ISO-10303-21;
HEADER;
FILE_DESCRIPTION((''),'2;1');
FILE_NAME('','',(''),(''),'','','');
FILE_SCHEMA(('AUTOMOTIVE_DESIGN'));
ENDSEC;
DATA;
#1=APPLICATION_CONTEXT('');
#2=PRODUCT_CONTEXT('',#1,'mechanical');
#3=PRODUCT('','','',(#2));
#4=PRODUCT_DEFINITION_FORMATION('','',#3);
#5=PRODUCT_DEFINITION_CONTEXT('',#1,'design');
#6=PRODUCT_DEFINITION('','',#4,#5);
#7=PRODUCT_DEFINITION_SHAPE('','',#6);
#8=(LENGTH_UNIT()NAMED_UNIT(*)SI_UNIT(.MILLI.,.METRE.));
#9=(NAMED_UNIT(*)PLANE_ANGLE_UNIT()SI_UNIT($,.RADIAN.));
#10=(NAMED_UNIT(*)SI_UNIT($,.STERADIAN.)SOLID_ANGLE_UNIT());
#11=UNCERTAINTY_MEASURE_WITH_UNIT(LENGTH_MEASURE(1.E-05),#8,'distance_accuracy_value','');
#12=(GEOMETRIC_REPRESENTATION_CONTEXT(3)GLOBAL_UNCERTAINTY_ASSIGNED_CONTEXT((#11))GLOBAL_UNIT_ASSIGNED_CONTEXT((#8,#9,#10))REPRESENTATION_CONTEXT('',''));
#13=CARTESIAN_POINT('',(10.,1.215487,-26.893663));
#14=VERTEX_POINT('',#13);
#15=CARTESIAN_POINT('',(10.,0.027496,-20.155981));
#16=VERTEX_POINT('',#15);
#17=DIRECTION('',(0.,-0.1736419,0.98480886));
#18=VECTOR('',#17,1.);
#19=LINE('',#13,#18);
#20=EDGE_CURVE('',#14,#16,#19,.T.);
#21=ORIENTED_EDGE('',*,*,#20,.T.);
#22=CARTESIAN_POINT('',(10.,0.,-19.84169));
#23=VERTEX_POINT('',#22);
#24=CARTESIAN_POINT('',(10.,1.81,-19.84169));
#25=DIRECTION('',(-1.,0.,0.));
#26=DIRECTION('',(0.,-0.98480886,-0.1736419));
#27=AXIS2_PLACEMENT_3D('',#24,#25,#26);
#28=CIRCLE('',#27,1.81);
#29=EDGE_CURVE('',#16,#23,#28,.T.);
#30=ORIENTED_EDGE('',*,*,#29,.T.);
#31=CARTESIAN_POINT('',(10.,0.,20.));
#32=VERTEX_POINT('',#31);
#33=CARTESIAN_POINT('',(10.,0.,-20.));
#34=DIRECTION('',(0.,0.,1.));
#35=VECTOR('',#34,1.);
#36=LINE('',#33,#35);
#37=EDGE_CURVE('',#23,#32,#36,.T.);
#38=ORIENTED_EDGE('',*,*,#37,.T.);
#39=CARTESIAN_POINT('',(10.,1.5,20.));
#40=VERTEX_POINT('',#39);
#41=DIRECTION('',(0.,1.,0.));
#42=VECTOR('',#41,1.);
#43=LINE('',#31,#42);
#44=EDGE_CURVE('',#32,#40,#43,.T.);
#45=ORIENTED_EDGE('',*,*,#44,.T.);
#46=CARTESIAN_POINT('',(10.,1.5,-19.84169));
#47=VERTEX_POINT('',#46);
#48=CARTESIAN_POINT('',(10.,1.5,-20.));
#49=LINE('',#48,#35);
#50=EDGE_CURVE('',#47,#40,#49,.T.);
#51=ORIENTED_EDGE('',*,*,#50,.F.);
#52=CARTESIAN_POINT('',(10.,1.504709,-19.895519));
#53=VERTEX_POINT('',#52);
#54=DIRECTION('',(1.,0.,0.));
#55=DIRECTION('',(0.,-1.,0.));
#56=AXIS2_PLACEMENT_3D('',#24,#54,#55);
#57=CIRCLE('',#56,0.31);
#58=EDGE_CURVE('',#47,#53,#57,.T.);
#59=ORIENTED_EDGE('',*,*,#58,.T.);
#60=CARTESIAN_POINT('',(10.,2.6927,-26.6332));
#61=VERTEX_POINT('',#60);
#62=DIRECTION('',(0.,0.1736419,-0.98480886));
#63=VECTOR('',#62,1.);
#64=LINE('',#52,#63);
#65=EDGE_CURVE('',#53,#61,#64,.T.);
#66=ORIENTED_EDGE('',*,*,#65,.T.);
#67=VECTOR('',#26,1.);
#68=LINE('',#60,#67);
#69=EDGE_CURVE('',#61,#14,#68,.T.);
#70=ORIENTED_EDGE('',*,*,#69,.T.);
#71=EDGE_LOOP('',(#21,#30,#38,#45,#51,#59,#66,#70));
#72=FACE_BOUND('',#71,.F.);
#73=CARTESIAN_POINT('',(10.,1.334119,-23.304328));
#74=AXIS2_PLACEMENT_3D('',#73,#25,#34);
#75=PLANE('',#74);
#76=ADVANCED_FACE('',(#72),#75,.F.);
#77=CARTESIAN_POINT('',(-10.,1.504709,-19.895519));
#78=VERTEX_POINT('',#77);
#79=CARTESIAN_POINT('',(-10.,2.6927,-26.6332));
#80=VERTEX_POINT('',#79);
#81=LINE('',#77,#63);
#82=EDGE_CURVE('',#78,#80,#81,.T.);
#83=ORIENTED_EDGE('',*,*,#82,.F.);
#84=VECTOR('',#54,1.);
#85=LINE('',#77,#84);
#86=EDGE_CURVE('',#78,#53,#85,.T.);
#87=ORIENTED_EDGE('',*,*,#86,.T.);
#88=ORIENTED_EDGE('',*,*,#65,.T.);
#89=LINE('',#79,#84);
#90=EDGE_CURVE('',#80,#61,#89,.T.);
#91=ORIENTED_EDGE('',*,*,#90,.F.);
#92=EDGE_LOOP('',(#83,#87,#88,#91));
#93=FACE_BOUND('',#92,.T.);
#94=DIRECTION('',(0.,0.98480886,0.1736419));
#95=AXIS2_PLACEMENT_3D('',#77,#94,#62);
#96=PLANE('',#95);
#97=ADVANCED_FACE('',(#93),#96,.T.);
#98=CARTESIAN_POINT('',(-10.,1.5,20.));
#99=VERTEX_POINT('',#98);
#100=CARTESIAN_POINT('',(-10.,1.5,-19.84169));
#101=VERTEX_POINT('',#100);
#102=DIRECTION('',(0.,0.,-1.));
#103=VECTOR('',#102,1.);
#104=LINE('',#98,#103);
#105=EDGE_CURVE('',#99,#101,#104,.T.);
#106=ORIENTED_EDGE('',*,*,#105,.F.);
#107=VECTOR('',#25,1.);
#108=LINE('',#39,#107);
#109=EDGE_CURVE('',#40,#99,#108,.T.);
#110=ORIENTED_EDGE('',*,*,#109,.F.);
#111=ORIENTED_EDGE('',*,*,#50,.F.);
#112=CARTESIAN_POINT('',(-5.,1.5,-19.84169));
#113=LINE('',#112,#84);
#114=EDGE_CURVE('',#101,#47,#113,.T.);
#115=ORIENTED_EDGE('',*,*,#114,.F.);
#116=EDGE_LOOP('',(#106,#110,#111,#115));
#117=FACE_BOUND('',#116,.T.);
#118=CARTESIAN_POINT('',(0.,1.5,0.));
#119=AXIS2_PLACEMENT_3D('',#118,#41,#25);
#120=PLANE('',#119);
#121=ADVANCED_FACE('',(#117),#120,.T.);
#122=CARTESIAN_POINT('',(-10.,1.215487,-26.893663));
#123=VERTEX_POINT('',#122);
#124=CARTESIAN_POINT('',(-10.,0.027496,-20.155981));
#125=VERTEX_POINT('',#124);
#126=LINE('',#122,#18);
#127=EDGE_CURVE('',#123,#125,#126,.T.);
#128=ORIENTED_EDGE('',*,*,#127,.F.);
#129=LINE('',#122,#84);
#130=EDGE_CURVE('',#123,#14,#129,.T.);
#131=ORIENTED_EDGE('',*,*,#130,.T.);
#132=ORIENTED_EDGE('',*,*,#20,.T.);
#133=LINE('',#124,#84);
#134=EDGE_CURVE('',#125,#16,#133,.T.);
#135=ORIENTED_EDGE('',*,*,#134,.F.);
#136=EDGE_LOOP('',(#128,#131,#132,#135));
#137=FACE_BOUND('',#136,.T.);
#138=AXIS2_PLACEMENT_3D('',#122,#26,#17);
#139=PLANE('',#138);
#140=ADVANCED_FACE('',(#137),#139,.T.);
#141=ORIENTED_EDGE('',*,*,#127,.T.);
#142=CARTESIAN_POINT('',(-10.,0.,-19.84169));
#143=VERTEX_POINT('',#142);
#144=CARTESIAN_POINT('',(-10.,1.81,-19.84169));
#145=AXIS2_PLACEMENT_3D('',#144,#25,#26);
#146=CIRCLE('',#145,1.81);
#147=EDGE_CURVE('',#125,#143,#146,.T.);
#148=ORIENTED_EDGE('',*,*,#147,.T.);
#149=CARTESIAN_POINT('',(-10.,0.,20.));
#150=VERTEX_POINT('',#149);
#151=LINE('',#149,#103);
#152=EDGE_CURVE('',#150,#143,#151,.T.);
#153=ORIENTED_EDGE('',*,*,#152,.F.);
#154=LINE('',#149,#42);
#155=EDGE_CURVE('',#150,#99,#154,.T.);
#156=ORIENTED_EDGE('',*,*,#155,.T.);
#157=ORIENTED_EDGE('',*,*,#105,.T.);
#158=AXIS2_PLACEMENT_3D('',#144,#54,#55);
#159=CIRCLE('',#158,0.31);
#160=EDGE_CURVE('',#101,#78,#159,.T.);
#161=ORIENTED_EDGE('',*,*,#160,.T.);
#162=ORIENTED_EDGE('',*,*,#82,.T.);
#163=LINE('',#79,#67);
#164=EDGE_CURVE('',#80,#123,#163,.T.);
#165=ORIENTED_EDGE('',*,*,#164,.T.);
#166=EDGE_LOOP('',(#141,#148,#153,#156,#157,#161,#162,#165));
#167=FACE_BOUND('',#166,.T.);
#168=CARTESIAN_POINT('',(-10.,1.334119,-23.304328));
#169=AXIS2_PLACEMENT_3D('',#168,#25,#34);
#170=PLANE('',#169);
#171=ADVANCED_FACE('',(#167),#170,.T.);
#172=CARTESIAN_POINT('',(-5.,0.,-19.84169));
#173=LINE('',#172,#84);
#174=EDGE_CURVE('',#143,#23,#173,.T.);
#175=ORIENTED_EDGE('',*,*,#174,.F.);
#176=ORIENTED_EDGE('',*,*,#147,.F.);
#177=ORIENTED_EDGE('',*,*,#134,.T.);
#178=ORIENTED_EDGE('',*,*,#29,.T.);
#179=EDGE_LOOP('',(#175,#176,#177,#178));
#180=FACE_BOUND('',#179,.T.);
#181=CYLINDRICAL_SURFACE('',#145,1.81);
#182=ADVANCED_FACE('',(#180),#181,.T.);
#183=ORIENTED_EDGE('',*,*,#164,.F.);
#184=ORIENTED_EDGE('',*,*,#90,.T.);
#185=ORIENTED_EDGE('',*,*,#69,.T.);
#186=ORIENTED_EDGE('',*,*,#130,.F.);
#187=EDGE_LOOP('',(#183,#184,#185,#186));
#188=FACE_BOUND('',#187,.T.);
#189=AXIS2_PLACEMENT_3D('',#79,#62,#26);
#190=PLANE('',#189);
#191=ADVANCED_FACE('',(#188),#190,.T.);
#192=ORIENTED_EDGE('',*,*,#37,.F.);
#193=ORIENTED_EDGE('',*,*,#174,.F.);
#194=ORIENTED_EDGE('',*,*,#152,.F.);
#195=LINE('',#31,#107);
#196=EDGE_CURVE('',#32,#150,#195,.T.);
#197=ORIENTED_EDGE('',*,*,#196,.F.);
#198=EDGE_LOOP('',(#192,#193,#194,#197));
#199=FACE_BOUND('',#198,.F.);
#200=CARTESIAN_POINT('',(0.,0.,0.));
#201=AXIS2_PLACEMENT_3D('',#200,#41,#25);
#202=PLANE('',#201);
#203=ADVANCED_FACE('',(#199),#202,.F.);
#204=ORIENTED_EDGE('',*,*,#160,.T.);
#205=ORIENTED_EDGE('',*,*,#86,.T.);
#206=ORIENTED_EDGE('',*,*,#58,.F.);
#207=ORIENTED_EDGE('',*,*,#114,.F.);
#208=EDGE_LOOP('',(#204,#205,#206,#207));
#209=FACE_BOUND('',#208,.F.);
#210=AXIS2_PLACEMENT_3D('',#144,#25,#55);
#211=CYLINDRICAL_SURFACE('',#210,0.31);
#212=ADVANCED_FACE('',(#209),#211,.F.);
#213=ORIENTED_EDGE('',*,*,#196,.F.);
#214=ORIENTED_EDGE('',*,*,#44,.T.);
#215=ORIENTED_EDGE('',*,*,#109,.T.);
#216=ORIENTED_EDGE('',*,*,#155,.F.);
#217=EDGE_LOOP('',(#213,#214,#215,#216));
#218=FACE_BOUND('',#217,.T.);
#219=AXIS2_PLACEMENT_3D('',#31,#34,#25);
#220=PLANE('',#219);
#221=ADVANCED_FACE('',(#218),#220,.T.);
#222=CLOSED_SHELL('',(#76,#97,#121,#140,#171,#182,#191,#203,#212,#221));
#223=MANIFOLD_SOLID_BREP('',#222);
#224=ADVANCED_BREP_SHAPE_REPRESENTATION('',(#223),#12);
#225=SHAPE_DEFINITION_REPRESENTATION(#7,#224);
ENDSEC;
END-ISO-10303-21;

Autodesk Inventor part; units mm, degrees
ref_plane "YZ Plane" through (0, 0, 0) normal (1, 0, 0) x (0, 1, 0)
ref_plane "XZ Plane" through (0, 0, 0) normal (0, 1, 0) x (-1, 0, 0)
ref_plane "XY Plane" through (0, 0, 0) normal (0, 0, 1) x (1, 0, 0)
sketch "Sketch1" plane through (0, 0, 0) normal (0, 1, 0) x (-1, 0, 0)
  line L0 (-10, 20) -> (10, 20)
  line L1 (10, 20) -> (10, -20)
  line L2 (10, -20) -> (-10, -20)
  line L3 (-10, -20) -> (-10, 20)
  line L4 (-10, 20) -> (10, -20) construction
  line L5 (10, 20) -> (-10, -20) construction
  point P0 (0, 0)
  dimension "d0" = 40
  dimension "d1" = 20
extrude "Plate1" add sketch "Sketch1" along normal blind 1.5
sketch "Sketch2" plane through (-10, 1.4772, -19.7395) normal (0, -0.9848078, -0.1736482) x (1, 0, 0)
  line L0 (20, 0) -> (0, 0)
  line L1 (0, 0) -> (0, -7)
  line L2 (0, -7) -> (20, -7)
  line L3 (20, -7) -> (20, 0)
edge flange "Flange1" height 7 angle 10 thickness 1.5 bend radius 0.31 thickness toward (0, -0.9848078, -0.1736482) relief tear relief width 1.5 relief depth 0.75 edges at (0, 1.5, -20) wall of the first edge with corners at (10, 1.4772, -19.7395) (-10, 1.4772, -19.7395) (-10, 2.6927, -26.6332) (10, 2.6927, -26.6332)
bend "Bend1"
corner "Corner1"
equation "\"d2\" = Thickness"
equation "\"d3\" = BendReliefWidth"
equation "\"d4\" = BendReliefDepth"
equation "\"d5\" = MinimumRemnant"
equation "\"d6\" = TransitionRadius"
equation "\"d9\" = BendRadius"
equation "\"d10\" = CornerReliefSize"
equation "\"d11\" = GapSize"
equation "\"d12\" = JacobiRadiusSize"
equation "\"BendReliefWidth\" = Thickness"
equation "\"BendReliefDepth\" = 0.5 * Thickness"
equation "\"CornerReliefSize\" = 4 * Thickness"
equation "\"MinimumRemnant\" = 2 * Thickness"
equation "\"TransitionRadius\" = BendRadius"
equation "\"JacobiRadiusSize\" = BendRadius"
equation "\"GapSize\" = Thickness"
equation "\"Thickness\" = 1.5"
equation "\"BendRadius\" = 0.31"
properties part number "axis_23_bottom_frame" material "Aluminum 6061-AHC"
